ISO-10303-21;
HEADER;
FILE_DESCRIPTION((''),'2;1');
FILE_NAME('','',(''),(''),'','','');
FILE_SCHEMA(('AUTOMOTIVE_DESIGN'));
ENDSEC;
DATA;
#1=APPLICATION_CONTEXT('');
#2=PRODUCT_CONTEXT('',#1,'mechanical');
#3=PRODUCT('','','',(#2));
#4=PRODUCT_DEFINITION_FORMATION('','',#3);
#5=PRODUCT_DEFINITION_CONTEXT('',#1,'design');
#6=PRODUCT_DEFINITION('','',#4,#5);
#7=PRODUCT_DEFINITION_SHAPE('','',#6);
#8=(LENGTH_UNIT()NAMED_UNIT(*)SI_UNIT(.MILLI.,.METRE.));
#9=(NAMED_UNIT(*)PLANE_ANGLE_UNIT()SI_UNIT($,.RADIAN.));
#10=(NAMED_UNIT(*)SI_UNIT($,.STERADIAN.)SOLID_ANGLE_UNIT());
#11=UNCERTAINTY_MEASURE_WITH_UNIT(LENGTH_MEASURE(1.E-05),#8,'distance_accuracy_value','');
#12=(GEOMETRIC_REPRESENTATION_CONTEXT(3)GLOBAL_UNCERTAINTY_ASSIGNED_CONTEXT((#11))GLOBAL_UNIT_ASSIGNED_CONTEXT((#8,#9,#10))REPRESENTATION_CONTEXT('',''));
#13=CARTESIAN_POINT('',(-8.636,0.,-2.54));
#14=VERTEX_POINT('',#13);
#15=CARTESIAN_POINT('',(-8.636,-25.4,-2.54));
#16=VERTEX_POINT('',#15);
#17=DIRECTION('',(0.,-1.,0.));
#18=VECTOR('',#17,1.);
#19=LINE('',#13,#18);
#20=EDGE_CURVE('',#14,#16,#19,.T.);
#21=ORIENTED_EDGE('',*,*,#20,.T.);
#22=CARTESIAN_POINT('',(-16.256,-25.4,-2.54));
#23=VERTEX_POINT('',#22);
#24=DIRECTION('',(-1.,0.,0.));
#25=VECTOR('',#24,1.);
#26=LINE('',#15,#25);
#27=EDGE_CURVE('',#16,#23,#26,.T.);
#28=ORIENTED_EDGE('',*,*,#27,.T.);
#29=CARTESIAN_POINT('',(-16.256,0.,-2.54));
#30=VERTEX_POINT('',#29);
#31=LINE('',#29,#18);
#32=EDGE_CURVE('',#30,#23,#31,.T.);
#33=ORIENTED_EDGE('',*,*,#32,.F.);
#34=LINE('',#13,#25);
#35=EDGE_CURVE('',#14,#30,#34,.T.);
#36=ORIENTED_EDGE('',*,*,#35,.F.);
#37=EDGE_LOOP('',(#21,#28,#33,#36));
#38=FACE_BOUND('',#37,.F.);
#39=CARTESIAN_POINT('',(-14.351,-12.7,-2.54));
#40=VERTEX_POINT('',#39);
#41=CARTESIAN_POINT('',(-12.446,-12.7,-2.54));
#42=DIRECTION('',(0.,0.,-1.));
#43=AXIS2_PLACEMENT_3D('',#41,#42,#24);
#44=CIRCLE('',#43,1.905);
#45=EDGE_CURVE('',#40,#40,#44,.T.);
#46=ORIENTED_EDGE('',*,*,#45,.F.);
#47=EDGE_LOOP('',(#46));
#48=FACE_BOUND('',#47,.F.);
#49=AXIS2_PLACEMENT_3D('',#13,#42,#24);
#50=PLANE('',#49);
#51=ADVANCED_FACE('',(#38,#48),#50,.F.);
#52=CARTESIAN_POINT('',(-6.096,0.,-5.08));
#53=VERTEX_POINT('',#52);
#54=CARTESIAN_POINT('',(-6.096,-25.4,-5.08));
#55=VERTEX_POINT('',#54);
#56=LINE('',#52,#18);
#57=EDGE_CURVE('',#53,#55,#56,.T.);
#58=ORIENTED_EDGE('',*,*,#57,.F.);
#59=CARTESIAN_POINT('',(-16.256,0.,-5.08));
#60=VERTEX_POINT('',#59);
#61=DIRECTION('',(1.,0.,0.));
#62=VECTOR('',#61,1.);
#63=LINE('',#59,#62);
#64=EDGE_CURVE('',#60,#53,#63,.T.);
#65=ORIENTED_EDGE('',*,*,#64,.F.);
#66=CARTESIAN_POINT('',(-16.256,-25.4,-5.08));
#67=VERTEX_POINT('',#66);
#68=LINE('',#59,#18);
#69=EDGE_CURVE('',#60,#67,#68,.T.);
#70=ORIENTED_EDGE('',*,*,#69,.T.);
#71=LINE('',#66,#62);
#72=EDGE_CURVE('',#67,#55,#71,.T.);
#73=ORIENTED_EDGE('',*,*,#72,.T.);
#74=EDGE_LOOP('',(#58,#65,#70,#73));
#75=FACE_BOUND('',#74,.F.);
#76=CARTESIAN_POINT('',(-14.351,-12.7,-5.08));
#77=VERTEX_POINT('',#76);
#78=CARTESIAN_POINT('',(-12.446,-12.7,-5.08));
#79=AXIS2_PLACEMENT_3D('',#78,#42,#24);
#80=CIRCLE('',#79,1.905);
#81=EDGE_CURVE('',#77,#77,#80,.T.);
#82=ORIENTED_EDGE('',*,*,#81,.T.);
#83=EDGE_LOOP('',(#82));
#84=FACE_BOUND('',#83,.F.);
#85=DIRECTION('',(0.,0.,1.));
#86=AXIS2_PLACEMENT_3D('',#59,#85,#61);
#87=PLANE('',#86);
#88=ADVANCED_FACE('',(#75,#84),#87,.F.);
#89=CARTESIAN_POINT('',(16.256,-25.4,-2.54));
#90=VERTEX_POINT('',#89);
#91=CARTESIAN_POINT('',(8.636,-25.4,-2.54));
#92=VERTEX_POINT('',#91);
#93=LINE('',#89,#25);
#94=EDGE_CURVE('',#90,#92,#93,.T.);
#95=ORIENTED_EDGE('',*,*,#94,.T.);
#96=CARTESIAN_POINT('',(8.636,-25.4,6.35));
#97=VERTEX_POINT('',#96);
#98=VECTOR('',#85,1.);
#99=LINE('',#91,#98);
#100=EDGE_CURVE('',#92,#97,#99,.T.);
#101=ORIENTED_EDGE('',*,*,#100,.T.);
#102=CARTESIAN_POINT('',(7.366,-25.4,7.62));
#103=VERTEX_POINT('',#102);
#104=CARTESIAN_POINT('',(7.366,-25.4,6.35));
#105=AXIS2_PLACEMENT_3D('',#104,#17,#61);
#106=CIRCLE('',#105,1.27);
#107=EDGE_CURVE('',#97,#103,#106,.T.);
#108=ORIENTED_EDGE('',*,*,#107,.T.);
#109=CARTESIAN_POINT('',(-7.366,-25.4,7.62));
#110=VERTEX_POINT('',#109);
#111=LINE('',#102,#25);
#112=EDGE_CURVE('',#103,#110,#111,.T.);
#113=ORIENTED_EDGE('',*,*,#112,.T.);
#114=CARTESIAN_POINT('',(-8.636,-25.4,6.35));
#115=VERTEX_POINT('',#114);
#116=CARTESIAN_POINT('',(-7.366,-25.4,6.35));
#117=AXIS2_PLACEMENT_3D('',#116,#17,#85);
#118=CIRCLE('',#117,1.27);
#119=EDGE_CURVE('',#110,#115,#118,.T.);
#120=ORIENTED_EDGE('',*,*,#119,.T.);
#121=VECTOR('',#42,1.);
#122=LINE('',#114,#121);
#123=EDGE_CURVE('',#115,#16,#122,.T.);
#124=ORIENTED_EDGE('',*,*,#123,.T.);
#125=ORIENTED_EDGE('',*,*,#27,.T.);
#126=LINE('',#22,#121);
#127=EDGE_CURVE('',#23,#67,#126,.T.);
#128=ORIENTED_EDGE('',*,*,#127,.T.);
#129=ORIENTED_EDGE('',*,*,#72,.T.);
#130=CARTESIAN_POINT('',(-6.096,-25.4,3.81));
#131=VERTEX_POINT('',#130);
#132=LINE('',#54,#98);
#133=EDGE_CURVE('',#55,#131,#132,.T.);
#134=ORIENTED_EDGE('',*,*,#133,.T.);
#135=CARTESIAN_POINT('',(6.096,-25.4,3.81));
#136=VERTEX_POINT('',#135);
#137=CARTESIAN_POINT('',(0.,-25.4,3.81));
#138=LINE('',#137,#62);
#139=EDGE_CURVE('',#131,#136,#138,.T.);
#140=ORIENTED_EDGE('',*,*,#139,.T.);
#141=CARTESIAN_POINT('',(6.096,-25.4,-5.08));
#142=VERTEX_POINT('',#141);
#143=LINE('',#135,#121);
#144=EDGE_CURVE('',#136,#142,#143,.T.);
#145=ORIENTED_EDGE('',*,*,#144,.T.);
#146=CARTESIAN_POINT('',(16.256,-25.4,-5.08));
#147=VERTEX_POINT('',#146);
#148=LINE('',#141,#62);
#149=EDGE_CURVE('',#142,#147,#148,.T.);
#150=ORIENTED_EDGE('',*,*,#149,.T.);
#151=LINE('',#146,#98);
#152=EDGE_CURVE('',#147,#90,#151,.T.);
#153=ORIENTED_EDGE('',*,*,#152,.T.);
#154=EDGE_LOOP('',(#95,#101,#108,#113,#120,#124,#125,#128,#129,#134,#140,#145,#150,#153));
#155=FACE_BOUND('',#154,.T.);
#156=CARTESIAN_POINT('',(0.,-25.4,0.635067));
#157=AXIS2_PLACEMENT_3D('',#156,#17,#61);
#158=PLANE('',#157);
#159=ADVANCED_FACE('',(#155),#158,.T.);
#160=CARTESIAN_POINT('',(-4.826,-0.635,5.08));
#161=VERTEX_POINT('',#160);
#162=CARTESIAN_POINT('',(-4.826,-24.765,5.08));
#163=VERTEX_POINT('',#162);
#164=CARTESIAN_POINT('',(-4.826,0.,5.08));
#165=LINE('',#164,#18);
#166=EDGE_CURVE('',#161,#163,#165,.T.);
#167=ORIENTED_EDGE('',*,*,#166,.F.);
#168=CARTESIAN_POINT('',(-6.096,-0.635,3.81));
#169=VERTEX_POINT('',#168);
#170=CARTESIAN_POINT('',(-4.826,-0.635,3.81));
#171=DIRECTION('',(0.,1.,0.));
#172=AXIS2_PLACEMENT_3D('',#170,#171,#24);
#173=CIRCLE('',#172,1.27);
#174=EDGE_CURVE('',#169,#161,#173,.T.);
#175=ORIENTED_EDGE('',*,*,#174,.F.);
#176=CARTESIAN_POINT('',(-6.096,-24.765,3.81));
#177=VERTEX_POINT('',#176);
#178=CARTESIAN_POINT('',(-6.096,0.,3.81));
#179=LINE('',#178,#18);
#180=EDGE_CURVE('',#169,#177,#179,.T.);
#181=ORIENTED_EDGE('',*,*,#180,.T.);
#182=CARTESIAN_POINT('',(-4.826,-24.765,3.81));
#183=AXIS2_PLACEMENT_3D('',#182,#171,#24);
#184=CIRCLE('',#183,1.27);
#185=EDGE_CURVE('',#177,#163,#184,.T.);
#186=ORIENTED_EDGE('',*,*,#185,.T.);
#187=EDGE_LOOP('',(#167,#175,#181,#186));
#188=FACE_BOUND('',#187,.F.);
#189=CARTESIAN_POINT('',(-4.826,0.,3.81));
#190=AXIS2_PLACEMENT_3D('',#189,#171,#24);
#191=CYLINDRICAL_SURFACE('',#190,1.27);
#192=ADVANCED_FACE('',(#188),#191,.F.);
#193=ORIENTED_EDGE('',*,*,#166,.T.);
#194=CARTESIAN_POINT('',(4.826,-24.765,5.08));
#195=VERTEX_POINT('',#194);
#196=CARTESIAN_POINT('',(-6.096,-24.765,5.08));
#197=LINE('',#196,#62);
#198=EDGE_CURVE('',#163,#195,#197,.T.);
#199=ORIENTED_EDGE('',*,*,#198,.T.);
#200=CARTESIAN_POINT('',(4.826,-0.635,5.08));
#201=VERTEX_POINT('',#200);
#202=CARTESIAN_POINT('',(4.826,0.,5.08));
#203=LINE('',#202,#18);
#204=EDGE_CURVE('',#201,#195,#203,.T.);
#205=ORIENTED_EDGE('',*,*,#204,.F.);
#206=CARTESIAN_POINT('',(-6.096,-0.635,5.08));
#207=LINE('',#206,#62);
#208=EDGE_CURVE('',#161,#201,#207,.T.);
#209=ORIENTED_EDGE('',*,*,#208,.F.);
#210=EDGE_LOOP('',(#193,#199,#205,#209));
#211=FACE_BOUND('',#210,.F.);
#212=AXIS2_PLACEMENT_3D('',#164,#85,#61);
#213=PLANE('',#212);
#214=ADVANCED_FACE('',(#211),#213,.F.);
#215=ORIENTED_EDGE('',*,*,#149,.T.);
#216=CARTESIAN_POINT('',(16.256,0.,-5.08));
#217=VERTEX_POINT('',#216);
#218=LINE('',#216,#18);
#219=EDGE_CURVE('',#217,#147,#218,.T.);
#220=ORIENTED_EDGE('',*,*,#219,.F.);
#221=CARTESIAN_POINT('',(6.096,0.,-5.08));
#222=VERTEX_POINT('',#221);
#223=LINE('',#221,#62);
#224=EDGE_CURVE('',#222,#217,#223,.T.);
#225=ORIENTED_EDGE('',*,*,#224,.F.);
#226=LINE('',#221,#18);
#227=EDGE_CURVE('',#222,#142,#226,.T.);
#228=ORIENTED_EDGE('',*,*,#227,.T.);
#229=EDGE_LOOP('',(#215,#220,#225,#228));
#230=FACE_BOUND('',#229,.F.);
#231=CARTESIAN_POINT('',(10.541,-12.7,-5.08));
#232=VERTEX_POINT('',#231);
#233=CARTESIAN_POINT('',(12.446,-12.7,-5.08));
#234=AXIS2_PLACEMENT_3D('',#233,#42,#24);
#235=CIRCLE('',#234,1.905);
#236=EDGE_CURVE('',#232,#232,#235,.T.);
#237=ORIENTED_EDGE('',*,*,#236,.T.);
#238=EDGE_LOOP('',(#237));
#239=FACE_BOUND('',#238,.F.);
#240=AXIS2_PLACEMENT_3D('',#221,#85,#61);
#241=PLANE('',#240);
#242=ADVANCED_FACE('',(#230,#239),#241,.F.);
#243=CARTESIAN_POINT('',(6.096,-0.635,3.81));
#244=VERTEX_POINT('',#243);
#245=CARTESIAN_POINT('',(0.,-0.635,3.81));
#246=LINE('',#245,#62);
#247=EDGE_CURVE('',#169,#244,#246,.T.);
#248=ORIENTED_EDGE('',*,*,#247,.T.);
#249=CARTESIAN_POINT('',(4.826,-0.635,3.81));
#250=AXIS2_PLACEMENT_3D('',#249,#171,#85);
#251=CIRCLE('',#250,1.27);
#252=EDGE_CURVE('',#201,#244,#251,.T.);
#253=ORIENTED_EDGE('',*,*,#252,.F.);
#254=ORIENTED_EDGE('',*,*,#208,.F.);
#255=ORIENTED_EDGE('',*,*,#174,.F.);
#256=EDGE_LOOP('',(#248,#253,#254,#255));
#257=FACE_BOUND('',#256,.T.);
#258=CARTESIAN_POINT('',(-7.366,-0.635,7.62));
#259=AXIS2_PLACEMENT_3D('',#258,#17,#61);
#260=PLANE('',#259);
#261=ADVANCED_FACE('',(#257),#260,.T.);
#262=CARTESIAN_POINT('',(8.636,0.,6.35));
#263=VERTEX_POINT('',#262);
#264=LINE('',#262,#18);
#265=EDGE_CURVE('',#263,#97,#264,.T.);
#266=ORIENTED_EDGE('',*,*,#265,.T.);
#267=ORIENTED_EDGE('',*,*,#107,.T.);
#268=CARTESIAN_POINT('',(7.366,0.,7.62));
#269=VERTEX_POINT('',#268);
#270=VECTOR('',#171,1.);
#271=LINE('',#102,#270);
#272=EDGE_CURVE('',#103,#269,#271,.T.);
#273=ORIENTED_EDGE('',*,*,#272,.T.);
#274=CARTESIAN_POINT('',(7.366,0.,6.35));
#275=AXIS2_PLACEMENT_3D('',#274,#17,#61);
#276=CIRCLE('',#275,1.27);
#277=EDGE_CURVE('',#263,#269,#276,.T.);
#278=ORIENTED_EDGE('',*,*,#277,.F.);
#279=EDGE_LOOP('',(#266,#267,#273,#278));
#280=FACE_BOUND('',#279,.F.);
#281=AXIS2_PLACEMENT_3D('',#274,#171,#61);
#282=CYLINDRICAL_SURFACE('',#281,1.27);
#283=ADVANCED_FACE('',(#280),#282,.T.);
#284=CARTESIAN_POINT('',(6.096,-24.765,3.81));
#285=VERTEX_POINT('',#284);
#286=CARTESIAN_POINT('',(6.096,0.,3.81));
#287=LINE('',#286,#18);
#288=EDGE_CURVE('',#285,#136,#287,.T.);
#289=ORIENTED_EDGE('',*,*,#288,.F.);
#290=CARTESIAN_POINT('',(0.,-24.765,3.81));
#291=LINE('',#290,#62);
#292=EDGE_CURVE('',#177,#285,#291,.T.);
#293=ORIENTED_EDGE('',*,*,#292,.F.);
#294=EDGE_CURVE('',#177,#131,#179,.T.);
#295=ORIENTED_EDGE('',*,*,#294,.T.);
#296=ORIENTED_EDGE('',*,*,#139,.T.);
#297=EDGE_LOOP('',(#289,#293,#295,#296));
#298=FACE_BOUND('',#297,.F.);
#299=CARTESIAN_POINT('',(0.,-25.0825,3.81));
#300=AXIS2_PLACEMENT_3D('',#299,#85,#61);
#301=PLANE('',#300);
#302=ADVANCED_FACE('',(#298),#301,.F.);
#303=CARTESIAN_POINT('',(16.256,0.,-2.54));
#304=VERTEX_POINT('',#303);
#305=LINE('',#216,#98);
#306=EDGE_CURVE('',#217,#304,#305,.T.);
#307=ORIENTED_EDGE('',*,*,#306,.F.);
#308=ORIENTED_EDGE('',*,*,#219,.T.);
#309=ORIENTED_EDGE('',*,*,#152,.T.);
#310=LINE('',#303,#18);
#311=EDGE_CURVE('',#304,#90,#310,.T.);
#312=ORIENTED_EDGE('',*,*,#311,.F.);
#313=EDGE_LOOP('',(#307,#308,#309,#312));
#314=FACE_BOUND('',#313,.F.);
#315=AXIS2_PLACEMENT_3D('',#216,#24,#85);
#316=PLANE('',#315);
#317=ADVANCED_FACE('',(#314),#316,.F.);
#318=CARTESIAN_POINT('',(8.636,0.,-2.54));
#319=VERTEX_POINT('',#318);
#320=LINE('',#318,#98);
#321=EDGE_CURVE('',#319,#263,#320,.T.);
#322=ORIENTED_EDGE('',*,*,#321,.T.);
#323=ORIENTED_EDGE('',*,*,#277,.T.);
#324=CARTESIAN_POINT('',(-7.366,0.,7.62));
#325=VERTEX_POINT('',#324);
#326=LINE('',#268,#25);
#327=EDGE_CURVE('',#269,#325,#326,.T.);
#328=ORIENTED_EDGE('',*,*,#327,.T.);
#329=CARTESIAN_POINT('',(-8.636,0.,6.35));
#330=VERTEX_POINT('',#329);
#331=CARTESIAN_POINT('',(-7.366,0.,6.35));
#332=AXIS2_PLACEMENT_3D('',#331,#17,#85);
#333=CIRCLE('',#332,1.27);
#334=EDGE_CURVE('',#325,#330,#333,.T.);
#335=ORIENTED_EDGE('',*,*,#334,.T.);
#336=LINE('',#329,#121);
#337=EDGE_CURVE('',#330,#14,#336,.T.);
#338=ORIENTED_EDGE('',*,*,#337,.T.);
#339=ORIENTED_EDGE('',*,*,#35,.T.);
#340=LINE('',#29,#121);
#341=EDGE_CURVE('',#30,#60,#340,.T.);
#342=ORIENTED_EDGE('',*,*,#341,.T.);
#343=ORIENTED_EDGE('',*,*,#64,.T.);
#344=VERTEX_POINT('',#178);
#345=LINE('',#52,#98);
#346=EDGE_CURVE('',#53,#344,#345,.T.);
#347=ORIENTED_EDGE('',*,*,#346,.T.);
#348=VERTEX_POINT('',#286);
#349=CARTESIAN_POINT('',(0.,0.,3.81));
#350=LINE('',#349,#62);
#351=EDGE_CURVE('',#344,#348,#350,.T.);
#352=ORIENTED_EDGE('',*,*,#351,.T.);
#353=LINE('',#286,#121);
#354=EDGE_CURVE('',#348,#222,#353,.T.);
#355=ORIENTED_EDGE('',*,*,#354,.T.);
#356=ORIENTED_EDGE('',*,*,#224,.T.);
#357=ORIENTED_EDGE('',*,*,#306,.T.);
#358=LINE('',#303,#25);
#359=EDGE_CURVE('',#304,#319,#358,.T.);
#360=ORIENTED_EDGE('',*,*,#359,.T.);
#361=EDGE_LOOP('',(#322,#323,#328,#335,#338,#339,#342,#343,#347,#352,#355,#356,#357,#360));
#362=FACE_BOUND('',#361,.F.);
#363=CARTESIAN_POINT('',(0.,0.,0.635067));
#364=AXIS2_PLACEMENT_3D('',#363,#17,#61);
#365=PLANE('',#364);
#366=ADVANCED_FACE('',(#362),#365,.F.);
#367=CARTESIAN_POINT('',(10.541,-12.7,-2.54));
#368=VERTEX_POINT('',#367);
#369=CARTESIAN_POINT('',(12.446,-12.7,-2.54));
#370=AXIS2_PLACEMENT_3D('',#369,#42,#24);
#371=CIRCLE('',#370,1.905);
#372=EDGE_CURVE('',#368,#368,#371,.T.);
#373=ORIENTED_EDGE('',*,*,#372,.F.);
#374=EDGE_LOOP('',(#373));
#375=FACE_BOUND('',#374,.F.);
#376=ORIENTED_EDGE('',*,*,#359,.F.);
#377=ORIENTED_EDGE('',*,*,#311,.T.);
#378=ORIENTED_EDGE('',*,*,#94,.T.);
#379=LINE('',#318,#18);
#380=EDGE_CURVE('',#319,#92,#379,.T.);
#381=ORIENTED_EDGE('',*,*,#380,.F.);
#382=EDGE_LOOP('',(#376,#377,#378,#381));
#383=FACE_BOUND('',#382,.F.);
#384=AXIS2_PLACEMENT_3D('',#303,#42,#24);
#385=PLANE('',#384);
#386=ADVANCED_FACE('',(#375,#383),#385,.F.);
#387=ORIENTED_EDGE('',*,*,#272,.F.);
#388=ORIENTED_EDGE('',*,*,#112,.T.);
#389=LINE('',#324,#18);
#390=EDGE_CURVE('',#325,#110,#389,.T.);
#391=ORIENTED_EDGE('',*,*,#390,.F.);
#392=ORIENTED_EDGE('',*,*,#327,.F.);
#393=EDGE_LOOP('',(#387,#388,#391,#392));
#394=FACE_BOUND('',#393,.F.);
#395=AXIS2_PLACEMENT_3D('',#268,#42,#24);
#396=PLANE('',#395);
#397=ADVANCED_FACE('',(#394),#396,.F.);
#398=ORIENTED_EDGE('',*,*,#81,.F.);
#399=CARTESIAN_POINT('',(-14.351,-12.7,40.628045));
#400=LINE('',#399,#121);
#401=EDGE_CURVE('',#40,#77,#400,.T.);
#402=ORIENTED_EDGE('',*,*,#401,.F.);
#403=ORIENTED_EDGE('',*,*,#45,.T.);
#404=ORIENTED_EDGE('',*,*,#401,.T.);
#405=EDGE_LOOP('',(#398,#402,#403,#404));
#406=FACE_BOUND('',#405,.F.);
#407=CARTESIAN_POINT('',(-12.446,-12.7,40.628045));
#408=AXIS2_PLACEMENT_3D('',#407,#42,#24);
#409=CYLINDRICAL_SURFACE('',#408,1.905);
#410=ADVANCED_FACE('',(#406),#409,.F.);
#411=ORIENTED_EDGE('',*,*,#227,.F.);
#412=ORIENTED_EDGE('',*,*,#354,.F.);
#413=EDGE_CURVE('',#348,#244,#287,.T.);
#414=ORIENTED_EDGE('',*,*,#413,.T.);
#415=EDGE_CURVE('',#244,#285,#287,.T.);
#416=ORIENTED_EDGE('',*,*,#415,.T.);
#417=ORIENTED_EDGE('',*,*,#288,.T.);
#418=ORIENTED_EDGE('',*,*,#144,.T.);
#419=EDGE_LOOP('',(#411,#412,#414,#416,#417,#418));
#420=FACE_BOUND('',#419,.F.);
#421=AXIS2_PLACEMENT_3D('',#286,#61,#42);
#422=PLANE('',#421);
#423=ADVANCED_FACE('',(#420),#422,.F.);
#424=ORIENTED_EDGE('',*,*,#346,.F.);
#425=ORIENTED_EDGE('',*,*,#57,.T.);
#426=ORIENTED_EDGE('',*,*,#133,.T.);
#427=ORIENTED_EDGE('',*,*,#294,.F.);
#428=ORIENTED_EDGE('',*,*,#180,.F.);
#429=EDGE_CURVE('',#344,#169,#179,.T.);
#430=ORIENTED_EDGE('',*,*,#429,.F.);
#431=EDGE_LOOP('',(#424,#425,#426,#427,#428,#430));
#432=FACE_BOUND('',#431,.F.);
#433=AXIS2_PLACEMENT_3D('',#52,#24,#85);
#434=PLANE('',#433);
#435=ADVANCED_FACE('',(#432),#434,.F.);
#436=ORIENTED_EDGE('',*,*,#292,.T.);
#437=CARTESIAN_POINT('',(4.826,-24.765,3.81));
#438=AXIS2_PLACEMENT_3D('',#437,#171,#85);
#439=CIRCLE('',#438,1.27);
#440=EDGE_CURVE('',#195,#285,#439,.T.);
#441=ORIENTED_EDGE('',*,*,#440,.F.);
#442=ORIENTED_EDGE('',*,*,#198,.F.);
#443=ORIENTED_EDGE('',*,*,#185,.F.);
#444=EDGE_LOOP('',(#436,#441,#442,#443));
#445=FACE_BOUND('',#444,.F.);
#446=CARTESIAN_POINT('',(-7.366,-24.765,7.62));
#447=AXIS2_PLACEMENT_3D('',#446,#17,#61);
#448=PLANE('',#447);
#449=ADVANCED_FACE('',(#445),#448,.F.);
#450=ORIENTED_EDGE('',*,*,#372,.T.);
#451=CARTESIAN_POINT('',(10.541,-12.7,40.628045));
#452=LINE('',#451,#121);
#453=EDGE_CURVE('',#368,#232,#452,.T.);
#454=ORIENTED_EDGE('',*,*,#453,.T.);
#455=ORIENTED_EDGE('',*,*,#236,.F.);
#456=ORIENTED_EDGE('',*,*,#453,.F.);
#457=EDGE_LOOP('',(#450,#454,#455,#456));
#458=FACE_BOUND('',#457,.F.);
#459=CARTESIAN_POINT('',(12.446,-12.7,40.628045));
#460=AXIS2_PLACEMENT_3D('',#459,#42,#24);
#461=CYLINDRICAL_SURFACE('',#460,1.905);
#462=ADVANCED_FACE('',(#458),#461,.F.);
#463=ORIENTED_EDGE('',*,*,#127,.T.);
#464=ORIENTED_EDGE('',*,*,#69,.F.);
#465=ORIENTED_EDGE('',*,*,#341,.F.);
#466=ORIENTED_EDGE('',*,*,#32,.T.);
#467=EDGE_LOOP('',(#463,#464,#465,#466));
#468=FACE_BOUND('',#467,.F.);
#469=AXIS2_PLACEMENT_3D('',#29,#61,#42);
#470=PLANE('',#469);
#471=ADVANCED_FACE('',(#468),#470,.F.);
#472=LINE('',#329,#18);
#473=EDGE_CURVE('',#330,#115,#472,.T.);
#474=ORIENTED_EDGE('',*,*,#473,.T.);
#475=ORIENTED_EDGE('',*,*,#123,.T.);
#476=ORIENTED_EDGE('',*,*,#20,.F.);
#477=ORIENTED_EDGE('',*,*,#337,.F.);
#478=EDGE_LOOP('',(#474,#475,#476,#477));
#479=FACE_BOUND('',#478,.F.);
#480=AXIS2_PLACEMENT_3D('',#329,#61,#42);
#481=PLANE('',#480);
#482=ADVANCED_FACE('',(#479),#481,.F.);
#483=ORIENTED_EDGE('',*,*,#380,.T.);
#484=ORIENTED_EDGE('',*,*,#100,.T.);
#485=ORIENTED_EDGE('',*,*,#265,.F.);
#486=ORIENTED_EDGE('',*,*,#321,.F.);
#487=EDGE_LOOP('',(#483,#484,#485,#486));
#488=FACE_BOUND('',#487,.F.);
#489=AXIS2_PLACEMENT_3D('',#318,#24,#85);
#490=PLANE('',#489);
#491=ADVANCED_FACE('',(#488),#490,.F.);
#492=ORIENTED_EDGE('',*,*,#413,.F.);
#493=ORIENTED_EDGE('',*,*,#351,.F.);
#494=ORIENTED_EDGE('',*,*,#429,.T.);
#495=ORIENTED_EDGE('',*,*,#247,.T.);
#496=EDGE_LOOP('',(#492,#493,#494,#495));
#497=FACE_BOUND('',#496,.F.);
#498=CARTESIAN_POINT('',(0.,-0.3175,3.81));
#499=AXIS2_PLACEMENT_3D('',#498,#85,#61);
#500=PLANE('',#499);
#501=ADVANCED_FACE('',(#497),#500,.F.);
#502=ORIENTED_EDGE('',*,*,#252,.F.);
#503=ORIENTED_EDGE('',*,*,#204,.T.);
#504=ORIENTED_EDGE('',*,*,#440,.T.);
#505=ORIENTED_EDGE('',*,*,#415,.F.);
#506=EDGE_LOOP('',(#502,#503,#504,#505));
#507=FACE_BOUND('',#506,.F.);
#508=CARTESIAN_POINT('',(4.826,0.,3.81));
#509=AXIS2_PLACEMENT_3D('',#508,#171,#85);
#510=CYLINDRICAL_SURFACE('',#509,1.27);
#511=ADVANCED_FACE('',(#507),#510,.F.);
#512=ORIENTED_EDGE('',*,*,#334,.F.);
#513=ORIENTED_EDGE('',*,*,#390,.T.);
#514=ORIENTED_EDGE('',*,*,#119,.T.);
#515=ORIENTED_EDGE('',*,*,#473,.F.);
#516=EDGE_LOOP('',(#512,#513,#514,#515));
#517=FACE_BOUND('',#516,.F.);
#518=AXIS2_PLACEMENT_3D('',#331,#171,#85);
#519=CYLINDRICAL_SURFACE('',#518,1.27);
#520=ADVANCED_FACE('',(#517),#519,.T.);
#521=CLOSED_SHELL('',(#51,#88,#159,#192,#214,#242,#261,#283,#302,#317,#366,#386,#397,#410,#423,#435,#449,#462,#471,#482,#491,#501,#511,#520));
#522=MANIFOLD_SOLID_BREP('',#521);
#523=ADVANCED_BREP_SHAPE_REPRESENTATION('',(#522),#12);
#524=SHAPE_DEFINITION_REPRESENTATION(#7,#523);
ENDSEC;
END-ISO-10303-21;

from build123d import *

# Parameters (mm, degrees)
F2_DEPTH = 25.4
F3_W     = 14.732
F3_H     = 0.635
F4_DEPTH = 3.81
F6_DEPTH = 3.81
F7_D     = 3.81


# Not quite as in the source:
# - a feature of the source that left no trace in its solid (it failed there, or was rolled back) is left out
# - a feature names something its author has since deleted; it is built from what else it names


with BuildPart() as f2:
    # F1 (on Front) → F2 (new body)
    with BuildSketch(Plane.XZ):
        with BuildLine():
            Line((-4.826, 5.08), (4.826, 5.08))
            ThreePointArc((4.826, 5.08), (5.7240256121, 4.7080256121), (6.096, 3.81))
            Line((6.096, 3.81), (6.096, -5.08))
            Line((6.096, -5.08), (16.256, -5.08))
            Line((16.256, -5.08), (16.256, -2.54))
            Line((16.256, -2.54), (8.636, -2.54))
            Line((8.636, -2.54), (8.636, 6.35))
            ThreePointArc((8.636, 6.35), (8.2640256121, 7.2480256121), (7.366, 7.62))
            Line((7.366, 7.62), (-7.366, 7.62))
            ThreePointArc((-7.366, 7.62), (-8.2640256121, 7.2480256121), (-8.636, 6.35))
            Line((-8.636, 6.35), (-8.636, -2.54))
            Line((-8.636, -2.54), (-16.256, -2.54))
            Line((-16.256, -2.54), (-16.256, -5.08))
            Line((-16.256, -5.08), (-6.096, -5.08))
            Line((-6.096, -5.08), (-6.096, 3.81))
            ThreePointArc((-6.096, 3.81), (-5.7240256121, 4.7080256121), (-4.826, 5.08))
        make_face()
    extrude(amount=F2_DEPTH)

    # F3 (on face) → F4 (join)
    with BuildSketch(Plane.XY.offset(7.62)):
        with Locations((0, -0.3175)):
            Rectangle(F3_W, F3_H)
    extrude(amount=-F4_DEPTH)

    # F3 (on face) → F6 (join)
    with BuildSketch(Plane.XY.offset(7.62)):
        with Locations((0, -25.0825)):
            Rectangle(F3_W, F3_H)
    extrude(amount=-F6_DEPTH)

    # F7 (through all)
    with Locations(Plane.XY.offset(-2.54)):
        with Locations((-12.446, -12.7), (12.446, -12.7)):
            Hole(F7_D / 2)


solid = f2.part
